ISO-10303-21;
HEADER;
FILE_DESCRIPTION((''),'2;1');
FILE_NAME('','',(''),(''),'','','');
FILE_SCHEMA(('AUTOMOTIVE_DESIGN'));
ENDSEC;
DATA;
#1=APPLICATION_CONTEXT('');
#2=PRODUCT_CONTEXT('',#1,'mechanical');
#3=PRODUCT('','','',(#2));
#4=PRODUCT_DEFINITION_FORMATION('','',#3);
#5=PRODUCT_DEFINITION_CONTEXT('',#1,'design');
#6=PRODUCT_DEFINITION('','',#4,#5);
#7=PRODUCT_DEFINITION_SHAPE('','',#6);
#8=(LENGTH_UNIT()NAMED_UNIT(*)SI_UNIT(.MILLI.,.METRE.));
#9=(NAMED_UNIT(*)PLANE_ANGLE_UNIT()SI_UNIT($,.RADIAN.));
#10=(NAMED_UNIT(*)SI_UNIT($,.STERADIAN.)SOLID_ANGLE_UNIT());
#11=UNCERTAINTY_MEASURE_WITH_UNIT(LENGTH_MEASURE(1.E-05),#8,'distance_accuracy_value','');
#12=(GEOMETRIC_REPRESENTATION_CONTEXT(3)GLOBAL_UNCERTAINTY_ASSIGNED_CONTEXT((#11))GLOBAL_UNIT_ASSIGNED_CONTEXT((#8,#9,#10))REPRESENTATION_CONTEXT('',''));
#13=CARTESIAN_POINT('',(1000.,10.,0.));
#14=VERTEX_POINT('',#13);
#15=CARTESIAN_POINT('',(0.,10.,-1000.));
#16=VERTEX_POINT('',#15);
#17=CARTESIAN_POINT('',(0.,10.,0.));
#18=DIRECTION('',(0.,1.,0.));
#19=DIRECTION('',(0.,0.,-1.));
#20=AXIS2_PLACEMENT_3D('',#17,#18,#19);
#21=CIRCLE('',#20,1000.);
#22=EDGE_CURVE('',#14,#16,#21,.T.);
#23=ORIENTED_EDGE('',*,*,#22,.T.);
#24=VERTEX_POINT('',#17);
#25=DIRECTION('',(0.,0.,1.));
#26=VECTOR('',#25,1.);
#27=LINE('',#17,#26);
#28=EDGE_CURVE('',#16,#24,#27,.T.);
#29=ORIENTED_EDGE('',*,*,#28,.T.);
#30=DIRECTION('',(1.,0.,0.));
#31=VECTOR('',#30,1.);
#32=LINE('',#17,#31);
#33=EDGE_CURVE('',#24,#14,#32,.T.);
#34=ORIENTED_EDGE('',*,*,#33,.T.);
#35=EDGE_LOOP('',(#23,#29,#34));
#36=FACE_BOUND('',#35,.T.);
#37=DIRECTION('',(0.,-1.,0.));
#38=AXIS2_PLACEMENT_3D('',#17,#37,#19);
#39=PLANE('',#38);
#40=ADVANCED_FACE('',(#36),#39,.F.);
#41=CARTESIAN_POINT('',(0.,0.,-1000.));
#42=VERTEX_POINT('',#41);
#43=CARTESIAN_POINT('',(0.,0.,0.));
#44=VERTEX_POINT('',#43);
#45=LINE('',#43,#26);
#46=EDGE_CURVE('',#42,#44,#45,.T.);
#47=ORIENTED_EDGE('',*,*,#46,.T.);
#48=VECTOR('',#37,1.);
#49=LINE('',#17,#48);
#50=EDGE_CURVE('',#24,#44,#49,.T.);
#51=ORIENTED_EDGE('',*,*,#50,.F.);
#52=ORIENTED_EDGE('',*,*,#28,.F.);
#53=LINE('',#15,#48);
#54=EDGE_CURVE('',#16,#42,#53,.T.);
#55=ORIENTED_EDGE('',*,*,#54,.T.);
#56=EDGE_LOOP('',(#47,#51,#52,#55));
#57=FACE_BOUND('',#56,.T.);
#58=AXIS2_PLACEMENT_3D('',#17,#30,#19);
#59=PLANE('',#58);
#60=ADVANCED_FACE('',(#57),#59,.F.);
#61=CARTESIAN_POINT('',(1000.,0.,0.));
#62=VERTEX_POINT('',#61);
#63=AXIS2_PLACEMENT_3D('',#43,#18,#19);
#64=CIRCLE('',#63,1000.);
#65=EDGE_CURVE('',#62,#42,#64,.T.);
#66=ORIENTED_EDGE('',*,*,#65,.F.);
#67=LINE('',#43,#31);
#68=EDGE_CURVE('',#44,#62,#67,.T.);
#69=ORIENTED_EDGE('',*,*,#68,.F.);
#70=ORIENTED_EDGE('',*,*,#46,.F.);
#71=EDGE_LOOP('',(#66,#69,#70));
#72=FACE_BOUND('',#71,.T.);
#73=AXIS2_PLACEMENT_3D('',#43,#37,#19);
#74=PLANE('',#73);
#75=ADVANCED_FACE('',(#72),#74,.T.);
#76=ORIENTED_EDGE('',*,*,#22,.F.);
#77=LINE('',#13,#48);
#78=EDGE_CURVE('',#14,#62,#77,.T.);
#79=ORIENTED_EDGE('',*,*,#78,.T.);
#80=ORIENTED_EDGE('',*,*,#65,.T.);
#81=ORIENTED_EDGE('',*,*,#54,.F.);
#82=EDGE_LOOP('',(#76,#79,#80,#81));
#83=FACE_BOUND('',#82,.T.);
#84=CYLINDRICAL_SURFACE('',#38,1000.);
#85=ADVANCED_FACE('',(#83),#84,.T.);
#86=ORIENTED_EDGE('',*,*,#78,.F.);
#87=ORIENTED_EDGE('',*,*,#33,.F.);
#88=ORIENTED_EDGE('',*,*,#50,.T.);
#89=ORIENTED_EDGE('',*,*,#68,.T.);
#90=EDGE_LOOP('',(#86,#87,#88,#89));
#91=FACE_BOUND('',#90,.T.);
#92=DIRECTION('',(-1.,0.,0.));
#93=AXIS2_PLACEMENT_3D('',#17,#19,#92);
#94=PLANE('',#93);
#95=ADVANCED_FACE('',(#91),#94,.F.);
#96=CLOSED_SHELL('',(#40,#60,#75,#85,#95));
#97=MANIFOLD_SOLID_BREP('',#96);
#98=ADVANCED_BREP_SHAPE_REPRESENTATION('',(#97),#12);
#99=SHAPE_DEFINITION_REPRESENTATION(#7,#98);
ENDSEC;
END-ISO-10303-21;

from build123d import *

# Parameters (mm, degrees)
BASE_FLANGE1_DEPTH = 10


# Sheet-metal steps are written as plain solids
with BuildPart() as part:
    # Sketch1 → Base-Flange1 (new body)
    with BuildSketch(Plane(origin=(0, 0, 0), x_dir=(1, 0, 0), z_dir=(0, 1, 0))):
        with BuildLine():
            Line((0, 0), (0, 1000))
            ThreePointArc((0, 1000), (707.106781187, 707.106781187), (1000, 0))
            Line((1000, 0), (0, 0))
        make_face()
    extrude(amount=BASE_FLANGE1_DEPTH)


solid = part.part
